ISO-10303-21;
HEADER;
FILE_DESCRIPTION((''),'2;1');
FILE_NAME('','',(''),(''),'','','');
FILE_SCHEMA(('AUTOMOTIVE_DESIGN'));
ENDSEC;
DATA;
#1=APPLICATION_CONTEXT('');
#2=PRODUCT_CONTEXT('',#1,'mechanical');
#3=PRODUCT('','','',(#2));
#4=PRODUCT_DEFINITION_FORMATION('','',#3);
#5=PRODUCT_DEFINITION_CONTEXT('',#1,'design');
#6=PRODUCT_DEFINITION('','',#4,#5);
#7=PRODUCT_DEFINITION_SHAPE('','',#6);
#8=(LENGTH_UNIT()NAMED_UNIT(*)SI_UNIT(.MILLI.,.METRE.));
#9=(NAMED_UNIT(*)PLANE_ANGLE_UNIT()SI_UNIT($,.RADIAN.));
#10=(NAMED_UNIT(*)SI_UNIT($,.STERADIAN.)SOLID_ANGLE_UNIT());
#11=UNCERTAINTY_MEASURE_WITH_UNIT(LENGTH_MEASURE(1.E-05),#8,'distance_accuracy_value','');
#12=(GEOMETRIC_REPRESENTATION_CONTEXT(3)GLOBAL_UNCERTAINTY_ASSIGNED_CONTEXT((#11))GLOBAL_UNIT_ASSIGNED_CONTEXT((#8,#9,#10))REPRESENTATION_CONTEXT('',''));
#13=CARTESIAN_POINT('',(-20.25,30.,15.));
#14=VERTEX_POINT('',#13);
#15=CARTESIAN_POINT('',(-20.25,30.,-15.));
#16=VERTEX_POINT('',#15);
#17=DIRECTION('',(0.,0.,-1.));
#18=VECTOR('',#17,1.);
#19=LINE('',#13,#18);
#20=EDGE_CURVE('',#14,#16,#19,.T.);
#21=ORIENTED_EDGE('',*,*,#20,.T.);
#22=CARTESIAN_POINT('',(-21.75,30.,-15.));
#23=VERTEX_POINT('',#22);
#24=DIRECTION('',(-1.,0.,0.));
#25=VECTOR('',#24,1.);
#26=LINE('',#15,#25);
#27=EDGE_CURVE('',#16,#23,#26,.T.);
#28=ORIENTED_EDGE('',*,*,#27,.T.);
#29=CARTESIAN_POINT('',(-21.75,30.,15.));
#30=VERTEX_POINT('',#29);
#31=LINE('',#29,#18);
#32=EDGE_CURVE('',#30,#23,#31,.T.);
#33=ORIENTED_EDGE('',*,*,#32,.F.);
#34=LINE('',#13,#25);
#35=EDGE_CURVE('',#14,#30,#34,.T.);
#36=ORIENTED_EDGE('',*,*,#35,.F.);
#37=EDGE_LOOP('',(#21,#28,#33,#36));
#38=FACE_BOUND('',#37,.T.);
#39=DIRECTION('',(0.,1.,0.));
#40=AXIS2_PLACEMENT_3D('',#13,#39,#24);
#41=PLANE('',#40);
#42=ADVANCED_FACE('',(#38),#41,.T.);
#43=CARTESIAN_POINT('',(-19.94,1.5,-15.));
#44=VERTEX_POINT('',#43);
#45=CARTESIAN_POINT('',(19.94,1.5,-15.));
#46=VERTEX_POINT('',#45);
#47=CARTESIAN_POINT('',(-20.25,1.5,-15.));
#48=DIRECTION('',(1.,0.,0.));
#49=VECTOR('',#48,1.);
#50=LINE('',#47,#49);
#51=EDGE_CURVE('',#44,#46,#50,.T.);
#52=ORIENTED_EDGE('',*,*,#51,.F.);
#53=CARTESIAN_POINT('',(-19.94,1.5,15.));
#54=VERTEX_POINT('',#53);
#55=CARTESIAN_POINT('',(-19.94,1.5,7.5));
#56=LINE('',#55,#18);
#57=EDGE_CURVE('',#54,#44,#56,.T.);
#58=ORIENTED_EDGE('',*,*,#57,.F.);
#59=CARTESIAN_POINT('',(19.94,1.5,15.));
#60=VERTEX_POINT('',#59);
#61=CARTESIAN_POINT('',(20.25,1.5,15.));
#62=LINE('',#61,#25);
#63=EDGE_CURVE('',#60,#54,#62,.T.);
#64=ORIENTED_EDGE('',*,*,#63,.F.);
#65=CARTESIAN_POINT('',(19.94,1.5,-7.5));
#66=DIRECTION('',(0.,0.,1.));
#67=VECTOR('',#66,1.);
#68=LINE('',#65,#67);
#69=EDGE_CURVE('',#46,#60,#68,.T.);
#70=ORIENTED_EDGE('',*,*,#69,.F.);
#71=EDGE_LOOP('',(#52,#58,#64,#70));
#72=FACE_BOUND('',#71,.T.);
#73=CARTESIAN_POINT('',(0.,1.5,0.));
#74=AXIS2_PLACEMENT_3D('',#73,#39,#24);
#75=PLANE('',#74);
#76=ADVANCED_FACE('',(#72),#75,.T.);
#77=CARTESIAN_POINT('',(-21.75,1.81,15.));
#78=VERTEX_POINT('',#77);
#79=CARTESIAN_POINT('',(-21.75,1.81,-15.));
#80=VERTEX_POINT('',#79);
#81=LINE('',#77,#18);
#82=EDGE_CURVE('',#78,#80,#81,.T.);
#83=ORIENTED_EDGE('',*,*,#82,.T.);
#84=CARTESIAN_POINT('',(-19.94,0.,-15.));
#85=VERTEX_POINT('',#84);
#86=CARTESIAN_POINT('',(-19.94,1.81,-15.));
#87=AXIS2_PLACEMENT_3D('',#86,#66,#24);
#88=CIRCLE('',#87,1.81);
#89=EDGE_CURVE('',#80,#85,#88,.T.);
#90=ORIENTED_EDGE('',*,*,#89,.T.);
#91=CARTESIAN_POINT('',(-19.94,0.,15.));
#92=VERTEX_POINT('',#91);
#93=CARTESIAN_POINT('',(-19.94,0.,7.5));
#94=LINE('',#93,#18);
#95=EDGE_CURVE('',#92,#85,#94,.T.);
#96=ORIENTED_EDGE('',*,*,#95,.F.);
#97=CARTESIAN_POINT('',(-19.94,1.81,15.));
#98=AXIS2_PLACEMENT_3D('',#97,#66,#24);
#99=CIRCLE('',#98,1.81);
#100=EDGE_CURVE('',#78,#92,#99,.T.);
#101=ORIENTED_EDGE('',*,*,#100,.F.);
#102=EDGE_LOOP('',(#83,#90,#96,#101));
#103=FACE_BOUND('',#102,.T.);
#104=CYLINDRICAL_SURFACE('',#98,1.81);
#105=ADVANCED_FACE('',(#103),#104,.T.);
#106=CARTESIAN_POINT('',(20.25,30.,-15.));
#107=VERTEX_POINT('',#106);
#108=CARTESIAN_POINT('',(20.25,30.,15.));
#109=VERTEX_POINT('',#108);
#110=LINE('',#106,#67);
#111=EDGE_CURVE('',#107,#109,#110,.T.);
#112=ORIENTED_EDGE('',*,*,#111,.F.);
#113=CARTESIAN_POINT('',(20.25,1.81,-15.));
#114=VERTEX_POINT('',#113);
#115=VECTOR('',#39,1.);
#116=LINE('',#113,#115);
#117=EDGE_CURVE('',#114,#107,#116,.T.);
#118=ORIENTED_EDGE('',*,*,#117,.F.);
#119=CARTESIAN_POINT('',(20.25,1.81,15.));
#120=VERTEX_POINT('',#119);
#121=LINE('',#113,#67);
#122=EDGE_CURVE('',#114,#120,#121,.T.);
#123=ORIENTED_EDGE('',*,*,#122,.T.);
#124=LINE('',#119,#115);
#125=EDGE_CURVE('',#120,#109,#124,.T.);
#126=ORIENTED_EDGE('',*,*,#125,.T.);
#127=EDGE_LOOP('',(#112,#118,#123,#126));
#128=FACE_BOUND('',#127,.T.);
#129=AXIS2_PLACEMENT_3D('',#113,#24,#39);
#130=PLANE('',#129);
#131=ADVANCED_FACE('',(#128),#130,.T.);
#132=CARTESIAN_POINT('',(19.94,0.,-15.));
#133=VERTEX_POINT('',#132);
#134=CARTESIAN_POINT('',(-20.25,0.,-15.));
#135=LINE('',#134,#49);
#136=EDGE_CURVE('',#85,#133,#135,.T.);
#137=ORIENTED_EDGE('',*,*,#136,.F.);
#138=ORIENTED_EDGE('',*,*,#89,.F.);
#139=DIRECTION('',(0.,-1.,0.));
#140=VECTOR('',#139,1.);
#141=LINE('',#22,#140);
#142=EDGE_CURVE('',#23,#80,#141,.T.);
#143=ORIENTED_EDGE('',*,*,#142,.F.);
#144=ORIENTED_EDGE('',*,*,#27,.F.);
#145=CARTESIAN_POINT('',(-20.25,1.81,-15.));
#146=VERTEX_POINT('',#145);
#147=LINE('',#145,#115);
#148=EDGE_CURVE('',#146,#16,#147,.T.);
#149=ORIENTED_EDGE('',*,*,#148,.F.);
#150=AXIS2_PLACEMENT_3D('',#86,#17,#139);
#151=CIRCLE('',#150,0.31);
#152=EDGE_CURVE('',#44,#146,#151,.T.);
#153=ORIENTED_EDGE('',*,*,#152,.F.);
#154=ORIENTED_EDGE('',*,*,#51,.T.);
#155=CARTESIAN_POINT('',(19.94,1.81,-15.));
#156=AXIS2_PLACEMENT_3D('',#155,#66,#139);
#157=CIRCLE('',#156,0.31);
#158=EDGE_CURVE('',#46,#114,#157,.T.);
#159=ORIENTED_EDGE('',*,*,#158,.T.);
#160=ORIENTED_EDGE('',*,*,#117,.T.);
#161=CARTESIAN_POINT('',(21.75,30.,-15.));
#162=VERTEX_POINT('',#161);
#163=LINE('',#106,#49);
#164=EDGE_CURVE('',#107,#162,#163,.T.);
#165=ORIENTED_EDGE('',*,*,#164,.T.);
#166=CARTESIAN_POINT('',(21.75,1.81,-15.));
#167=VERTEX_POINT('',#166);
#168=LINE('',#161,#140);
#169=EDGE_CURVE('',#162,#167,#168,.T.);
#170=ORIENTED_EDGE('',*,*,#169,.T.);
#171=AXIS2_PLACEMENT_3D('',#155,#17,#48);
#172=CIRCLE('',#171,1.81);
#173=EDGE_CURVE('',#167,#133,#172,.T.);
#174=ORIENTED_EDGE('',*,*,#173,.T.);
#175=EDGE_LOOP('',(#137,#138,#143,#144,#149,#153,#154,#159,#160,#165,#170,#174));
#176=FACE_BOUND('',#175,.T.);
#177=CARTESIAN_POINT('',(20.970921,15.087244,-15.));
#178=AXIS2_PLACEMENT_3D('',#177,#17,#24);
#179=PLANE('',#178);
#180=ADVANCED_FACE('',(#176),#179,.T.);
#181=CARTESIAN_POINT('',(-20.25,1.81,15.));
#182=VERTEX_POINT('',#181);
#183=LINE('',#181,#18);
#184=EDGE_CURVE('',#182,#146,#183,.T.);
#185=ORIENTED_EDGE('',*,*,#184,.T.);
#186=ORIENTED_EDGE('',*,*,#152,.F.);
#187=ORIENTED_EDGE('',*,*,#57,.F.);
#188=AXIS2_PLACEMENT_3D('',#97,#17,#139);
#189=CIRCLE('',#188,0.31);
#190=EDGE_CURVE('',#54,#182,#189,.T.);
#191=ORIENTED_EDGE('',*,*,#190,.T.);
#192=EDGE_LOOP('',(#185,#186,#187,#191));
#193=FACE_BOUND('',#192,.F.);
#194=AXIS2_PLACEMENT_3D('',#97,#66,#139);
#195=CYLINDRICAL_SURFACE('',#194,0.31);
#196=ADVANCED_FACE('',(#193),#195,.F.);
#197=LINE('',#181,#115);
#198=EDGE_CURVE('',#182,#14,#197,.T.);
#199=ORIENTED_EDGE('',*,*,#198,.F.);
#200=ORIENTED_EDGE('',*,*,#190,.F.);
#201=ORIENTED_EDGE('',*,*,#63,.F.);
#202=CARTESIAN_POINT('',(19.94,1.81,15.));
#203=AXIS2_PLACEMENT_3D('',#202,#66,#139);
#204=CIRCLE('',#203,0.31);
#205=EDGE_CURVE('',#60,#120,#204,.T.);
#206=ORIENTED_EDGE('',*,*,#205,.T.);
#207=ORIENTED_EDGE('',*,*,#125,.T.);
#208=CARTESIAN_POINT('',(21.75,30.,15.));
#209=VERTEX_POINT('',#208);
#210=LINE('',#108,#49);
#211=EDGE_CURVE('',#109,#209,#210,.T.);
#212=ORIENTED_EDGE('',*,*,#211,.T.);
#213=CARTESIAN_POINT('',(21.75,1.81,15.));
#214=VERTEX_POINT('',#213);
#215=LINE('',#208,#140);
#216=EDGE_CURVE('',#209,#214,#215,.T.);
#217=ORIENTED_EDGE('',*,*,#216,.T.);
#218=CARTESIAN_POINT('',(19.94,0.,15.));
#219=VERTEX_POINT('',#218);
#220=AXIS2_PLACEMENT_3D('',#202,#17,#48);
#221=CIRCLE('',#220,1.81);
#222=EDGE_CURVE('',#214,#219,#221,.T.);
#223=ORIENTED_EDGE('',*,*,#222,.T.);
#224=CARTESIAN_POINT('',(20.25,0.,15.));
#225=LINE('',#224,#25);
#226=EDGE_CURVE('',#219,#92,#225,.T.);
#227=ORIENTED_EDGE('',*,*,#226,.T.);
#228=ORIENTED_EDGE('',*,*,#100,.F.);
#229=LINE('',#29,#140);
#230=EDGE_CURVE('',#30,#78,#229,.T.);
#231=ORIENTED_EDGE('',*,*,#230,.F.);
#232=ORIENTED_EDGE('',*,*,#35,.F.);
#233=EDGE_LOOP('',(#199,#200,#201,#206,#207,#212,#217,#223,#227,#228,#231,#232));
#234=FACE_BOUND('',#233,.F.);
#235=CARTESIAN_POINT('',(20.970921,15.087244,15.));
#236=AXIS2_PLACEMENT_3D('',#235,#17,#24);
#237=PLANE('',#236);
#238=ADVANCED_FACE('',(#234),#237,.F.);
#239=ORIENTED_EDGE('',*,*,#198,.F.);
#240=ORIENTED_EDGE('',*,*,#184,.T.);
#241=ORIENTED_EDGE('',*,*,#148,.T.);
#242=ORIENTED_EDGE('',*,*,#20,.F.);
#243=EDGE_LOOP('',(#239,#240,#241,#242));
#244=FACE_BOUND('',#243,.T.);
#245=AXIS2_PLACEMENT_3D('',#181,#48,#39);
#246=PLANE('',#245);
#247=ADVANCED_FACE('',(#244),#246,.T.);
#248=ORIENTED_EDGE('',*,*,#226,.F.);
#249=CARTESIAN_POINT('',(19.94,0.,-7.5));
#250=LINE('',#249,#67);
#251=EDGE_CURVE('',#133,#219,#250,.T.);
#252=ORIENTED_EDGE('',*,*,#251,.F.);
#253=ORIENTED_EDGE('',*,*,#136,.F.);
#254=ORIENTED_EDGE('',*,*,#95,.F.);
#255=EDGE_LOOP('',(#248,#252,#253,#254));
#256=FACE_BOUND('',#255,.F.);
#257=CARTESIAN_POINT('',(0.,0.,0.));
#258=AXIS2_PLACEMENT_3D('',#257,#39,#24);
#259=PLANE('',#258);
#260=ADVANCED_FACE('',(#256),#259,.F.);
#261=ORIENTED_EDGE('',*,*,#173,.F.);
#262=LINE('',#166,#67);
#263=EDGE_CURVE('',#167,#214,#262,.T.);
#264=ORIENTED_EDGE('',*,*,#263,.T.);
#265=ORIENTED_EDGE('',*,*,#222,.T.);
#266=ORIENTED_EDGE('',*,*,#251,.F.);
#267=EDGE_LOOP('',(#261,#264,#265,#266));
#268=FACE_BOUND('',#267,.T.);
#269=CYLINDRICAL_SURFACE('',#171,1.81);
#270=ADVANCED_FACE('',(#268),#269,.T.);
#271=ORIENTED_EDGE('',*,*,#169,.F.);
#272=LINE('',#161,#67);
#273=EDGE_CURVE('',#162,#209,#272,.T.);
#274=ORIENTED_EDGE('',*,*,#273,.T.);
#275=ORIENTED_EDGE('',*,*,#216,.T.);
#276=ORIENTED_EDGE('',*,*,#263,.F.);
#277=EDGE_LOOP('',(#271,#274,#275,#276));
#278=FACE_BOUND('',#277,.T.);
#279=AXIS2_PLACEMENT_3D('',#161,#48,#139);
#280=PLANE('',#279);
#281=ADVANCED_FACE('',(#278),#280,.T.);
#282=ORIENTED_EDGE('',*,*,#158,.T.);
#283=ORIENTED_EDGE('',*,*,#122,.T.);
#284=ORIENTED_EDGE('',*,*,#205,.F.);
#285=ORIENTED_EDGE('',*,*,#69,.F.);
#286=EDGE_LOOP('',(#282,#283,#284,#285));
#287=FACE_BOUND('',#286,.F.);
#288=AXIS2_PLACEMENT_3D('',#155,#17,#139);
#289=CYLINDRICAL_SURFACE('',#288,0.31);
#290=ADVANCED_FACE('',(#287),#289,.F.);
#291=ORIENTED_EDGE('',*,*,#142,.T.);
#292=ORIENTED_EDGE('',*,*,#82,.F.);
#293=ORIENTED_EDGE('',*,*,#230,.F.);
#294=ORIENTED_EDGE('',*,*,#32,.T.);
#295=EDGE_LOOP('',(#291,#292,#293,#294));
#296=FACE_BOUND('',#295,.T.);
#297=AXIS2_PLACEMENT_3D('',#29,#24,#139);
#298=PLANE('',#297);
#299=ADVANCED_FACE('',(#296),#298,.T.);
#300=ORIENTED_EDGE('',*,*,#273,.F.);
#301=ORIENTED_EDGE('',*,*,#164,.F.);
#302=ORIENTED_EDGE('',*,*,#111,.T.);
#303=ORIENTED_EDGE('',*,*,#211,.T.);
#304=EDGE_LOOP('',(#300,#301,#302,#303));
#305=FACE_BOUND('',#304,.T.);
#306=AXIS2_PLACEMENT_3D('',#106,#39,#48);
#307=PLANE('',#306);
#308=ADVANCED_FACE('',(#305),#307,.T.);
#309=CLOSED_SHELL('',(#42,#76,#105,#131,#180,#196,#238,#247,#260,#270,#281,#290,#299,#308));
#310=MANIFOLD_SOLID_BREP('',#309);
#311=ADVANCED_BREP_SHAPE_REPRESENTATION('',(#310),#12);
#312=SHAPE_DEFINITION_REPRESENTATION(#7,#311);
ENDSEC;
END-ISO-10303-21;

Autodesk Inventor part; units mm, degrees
ref_plane "YZ Plane" through (0, 0, 0) normal (1, 0, 0) x (0, 1, 0)
ref_plane "XZ Plane" through (0, 0, 0) normal (0, 1, 0) x (-1, 0, 0)
ref_plane "XY Plane" through (0, 0, 0) normal (0, 0, 1) x (1, 0, 0)
sketch "Sketch1" plane through (0, 0, 0) normal (0, 1, 0) x (-1, 0, 0)
  line L0 (-20.25, 15) -> (20.25, 15)
  line L1 (20.25, 15) -> (20.25, -15)
  line L2 (20.25, -15) -> (-20.25, -15)
  line L3 (-20.25, -15) -> (-20.25, 15)
  line L4 (-20.25, 15) -> (20.25, -15) construction
  line L5 (20.25, 15) -> (-20.25, -15) construction
  point P0 (0, 0)
  dimension "d0" = 30
  dimension "d1" = 40.5
extrude "Plate1" add sketch "Sketch1" along normal blind 1.5
sketch "Sketch2" plane through (21.75, 0, -15) normal (-1, 0, 0) x (0, -1, 0)
  line L0 (0, 30) -> (0, 0)
  line L1 (0, 0) -> (-30, 0)
  line L2 (-30, 0) -> (-30, 30)
  line L3 (-30, 30) -> (0, 30)
edge flange "Flange1" height 30 angle 90 thickness 1.5 bend radius 0.31 thickness toward (-1, 0, 0) relief tear relief width 1.5 relief depth 0.75 corner gap 0.31 corner form 0 edges at (20.25, 1.5, 0) (-20.25, 1.5, 0) wall of the first edge with corners at (21.75, 0, 15) (21.75, 0, -15) (21.75, 30, -15) (21.75, 30, 15)
bend "Bend1"
corner "Corner1"
sketch "Sketch3" plane through (-21.75, 30, -15) normal (-1, 0, 0) x (0, 0, 1)
  point P0 (15, -30)
equation "\"d2\" = Thickness"
equation "\"d3\" = BendReliefWidth"
equation "\"d4\" = BendReliefDepth"
equation "\"d5\" = MinimumRemnant"
equation "\"d6\" = TransitionRadius"
equation "\"d9\" = BendRadius"
equation "\"d10\" = CornerReliefSize"
equation "\"d11\" = GapSize"
equation "\"d12\" = JacobiRadiusSize"
equation "\"BendReliefWidth\" = Thickness"
equation "\"BendReliefDepth\" = 0.5 * Thickness"
equation "\"CornerReliefSize\" = 4 * Thickness"
equation "\"MinimumRemnant\" = 2 * Thickness"
equation "\"TransitionRadius\" = BendRadius"
equation "\"JacobiRadiusSize\" = BendRadius"
equation "\"GapSize\" = Thickness"
equation "\"Thickness\" = 1.5"
equation "\"BendRadius\" = 0.31"
properties part number "hurseong" material "Aluminum 6061-AHC"
